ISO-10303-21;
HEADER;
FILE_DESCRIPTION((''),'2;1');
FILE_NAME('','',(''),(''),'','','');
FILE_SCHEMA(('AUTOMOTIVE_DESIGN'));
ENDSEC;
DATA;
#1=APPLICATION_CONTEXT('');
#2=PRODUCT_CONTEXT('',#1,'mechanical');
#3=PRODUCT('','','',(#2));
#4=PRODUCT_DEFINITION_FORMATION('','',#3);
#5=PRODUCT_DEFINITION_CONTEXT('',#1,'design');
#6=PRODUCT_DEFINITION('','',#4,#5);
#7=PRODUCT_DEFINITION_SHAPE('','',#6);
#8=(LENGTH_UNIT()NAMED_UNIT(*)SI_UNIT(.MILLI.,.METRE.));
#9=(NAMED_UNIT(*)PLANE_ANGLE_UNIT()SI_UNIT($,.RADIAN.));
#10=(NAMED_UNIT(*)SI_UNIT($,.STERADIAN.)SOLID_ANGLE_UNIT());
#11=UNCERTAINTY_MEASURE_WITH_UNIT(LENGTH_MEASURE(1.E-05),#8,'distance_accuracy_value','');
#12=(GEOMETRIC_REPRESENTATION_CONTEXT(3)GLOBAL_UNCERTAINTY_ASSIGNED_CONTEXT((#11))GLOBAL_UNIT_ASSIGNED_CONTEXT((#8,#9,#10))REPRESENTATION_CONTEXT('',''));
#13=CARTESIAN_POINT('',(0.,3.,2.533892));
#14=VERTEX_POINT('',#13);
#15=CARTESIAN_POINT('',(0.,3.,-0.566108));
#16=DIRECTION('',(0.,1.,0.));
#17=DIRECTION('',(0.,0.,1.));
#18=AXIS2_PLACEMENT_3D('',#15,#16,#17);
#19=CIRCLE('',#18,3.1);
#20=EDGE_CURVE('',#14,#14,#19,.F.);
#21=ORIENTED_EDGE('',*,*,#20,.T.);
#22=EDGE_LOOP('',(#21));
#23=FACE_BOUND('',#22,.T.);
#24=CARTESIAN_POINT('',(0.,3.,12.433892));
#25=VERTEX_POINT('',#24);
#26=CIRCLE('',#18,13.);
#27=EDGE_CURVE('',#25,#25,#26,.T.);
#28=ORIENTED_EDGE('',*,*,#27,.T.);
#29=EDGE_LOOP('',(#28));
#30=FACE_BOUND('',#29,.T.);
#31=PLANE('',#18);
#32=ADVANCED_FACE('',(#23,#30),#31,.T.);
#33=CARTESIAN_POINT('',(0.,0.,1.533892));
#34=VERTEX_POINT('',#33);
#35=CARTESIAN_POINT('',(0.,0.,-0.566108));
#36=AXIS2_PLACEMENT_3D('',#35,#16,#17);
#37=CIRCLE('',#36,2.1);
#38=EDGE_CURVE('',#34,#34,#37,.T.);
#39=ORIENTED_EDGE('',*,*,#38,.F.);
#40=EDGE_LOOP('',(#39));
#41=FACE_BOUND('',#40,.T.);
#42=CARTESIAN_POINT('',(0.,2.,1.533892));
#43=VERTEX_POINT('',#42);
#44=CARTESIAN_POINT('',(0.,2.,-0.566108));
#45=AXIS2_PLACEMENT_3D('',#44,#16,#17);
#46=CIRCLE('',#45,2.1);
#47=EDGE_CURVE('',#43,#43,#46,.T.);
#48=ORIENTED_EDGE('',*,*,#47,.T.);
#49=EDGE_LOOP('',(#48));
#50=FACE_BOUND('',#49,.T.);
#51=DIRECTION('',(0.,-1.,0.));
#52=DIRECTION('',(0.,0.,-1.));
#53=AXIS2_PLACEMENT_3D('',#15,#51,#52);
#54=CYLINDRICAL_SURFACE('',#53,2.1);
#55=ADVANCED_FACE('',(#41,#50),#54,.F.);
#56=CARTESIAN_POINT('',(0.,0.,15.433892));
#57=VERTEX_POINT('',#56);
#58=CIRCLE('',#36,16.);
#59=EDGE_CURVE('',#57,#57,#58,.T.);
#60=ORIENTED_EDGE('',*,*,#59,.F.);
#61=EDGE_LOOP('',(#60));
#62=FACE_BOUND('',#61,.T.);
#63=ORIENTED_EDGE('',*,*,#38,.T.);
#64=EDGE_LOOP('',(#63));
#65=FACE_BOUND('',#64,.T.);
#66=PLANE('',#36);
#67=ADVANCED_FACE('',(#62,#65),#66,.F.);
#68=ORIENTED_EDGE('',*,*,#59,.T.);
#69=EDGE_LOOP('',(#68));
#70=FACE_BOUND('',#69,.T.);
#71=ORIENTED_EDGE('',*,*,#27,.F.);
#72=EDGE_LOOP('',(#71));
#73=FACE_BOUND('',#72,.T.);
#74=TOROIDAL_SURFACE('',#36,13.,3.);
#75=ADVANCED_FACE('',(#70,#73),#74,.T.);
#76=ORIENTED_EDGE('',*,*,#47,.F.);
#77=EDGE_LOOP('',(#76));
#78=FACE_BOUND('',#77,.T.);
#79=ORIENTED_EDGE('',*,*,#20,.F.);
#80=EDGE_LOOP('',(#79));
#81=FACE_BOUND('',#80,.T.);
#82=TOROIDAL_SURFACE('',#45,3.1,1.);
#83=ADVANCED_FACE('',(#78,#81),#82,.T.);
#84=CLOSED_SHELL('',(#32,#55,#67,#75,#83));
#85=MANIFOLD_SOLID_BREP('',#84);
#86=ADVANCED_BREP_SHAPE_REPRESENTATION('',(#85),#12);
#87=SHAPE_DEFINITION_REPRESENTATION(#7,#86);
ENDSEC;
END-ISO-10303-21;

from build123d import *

# Parameters (mm, degrees)
SKETCH_1_R      = 16
SKETCH_1_R_2    = 2.1
EXTRUDE_1_DEPTH = 3
FILLET_1_R      = 3
FILLET_2_R      = 1


with BuildPart() as part:
    # Эскиз1 → Бобышка-Вытянуть1 (new body)
    with BuildSketch(Plane(origin=(0, 0, 0), x_dir=(1, 0, 0), z_dir=(0, 1, 0))):
        with Locations(Location((0, 0.566108198, 0), (0, 0, 270))):
            Circle(SKETCH_1_R)
        with Locations(Location((0, 0.566108198, 0), (0, 0, 270))):
            Circle(SKETCH_1_R_2, mode=Mode.SUBTRACT)
    extrude(amount=EXTRUDE_1_DEPTH)

    # Скругление1
    fillet_1_edges = [part.edges().sort_by_distance(p)[0] for p in [
        (0, 3, -16.566108198),
    ]]
    fillet(fillet_1_edges, radius=FILLET_1_R - 0.0001)  # a hair under: the kernel refuses the full size

    # Скругление2
    fillet_2_edges = [part.edges().sort_by_distance(p)[0] for p in [
        (0, 3, -2.666108198),
    ]]
    fillet(fillet_2_edges, radius=FILLET_2_R)


solid = part.part
